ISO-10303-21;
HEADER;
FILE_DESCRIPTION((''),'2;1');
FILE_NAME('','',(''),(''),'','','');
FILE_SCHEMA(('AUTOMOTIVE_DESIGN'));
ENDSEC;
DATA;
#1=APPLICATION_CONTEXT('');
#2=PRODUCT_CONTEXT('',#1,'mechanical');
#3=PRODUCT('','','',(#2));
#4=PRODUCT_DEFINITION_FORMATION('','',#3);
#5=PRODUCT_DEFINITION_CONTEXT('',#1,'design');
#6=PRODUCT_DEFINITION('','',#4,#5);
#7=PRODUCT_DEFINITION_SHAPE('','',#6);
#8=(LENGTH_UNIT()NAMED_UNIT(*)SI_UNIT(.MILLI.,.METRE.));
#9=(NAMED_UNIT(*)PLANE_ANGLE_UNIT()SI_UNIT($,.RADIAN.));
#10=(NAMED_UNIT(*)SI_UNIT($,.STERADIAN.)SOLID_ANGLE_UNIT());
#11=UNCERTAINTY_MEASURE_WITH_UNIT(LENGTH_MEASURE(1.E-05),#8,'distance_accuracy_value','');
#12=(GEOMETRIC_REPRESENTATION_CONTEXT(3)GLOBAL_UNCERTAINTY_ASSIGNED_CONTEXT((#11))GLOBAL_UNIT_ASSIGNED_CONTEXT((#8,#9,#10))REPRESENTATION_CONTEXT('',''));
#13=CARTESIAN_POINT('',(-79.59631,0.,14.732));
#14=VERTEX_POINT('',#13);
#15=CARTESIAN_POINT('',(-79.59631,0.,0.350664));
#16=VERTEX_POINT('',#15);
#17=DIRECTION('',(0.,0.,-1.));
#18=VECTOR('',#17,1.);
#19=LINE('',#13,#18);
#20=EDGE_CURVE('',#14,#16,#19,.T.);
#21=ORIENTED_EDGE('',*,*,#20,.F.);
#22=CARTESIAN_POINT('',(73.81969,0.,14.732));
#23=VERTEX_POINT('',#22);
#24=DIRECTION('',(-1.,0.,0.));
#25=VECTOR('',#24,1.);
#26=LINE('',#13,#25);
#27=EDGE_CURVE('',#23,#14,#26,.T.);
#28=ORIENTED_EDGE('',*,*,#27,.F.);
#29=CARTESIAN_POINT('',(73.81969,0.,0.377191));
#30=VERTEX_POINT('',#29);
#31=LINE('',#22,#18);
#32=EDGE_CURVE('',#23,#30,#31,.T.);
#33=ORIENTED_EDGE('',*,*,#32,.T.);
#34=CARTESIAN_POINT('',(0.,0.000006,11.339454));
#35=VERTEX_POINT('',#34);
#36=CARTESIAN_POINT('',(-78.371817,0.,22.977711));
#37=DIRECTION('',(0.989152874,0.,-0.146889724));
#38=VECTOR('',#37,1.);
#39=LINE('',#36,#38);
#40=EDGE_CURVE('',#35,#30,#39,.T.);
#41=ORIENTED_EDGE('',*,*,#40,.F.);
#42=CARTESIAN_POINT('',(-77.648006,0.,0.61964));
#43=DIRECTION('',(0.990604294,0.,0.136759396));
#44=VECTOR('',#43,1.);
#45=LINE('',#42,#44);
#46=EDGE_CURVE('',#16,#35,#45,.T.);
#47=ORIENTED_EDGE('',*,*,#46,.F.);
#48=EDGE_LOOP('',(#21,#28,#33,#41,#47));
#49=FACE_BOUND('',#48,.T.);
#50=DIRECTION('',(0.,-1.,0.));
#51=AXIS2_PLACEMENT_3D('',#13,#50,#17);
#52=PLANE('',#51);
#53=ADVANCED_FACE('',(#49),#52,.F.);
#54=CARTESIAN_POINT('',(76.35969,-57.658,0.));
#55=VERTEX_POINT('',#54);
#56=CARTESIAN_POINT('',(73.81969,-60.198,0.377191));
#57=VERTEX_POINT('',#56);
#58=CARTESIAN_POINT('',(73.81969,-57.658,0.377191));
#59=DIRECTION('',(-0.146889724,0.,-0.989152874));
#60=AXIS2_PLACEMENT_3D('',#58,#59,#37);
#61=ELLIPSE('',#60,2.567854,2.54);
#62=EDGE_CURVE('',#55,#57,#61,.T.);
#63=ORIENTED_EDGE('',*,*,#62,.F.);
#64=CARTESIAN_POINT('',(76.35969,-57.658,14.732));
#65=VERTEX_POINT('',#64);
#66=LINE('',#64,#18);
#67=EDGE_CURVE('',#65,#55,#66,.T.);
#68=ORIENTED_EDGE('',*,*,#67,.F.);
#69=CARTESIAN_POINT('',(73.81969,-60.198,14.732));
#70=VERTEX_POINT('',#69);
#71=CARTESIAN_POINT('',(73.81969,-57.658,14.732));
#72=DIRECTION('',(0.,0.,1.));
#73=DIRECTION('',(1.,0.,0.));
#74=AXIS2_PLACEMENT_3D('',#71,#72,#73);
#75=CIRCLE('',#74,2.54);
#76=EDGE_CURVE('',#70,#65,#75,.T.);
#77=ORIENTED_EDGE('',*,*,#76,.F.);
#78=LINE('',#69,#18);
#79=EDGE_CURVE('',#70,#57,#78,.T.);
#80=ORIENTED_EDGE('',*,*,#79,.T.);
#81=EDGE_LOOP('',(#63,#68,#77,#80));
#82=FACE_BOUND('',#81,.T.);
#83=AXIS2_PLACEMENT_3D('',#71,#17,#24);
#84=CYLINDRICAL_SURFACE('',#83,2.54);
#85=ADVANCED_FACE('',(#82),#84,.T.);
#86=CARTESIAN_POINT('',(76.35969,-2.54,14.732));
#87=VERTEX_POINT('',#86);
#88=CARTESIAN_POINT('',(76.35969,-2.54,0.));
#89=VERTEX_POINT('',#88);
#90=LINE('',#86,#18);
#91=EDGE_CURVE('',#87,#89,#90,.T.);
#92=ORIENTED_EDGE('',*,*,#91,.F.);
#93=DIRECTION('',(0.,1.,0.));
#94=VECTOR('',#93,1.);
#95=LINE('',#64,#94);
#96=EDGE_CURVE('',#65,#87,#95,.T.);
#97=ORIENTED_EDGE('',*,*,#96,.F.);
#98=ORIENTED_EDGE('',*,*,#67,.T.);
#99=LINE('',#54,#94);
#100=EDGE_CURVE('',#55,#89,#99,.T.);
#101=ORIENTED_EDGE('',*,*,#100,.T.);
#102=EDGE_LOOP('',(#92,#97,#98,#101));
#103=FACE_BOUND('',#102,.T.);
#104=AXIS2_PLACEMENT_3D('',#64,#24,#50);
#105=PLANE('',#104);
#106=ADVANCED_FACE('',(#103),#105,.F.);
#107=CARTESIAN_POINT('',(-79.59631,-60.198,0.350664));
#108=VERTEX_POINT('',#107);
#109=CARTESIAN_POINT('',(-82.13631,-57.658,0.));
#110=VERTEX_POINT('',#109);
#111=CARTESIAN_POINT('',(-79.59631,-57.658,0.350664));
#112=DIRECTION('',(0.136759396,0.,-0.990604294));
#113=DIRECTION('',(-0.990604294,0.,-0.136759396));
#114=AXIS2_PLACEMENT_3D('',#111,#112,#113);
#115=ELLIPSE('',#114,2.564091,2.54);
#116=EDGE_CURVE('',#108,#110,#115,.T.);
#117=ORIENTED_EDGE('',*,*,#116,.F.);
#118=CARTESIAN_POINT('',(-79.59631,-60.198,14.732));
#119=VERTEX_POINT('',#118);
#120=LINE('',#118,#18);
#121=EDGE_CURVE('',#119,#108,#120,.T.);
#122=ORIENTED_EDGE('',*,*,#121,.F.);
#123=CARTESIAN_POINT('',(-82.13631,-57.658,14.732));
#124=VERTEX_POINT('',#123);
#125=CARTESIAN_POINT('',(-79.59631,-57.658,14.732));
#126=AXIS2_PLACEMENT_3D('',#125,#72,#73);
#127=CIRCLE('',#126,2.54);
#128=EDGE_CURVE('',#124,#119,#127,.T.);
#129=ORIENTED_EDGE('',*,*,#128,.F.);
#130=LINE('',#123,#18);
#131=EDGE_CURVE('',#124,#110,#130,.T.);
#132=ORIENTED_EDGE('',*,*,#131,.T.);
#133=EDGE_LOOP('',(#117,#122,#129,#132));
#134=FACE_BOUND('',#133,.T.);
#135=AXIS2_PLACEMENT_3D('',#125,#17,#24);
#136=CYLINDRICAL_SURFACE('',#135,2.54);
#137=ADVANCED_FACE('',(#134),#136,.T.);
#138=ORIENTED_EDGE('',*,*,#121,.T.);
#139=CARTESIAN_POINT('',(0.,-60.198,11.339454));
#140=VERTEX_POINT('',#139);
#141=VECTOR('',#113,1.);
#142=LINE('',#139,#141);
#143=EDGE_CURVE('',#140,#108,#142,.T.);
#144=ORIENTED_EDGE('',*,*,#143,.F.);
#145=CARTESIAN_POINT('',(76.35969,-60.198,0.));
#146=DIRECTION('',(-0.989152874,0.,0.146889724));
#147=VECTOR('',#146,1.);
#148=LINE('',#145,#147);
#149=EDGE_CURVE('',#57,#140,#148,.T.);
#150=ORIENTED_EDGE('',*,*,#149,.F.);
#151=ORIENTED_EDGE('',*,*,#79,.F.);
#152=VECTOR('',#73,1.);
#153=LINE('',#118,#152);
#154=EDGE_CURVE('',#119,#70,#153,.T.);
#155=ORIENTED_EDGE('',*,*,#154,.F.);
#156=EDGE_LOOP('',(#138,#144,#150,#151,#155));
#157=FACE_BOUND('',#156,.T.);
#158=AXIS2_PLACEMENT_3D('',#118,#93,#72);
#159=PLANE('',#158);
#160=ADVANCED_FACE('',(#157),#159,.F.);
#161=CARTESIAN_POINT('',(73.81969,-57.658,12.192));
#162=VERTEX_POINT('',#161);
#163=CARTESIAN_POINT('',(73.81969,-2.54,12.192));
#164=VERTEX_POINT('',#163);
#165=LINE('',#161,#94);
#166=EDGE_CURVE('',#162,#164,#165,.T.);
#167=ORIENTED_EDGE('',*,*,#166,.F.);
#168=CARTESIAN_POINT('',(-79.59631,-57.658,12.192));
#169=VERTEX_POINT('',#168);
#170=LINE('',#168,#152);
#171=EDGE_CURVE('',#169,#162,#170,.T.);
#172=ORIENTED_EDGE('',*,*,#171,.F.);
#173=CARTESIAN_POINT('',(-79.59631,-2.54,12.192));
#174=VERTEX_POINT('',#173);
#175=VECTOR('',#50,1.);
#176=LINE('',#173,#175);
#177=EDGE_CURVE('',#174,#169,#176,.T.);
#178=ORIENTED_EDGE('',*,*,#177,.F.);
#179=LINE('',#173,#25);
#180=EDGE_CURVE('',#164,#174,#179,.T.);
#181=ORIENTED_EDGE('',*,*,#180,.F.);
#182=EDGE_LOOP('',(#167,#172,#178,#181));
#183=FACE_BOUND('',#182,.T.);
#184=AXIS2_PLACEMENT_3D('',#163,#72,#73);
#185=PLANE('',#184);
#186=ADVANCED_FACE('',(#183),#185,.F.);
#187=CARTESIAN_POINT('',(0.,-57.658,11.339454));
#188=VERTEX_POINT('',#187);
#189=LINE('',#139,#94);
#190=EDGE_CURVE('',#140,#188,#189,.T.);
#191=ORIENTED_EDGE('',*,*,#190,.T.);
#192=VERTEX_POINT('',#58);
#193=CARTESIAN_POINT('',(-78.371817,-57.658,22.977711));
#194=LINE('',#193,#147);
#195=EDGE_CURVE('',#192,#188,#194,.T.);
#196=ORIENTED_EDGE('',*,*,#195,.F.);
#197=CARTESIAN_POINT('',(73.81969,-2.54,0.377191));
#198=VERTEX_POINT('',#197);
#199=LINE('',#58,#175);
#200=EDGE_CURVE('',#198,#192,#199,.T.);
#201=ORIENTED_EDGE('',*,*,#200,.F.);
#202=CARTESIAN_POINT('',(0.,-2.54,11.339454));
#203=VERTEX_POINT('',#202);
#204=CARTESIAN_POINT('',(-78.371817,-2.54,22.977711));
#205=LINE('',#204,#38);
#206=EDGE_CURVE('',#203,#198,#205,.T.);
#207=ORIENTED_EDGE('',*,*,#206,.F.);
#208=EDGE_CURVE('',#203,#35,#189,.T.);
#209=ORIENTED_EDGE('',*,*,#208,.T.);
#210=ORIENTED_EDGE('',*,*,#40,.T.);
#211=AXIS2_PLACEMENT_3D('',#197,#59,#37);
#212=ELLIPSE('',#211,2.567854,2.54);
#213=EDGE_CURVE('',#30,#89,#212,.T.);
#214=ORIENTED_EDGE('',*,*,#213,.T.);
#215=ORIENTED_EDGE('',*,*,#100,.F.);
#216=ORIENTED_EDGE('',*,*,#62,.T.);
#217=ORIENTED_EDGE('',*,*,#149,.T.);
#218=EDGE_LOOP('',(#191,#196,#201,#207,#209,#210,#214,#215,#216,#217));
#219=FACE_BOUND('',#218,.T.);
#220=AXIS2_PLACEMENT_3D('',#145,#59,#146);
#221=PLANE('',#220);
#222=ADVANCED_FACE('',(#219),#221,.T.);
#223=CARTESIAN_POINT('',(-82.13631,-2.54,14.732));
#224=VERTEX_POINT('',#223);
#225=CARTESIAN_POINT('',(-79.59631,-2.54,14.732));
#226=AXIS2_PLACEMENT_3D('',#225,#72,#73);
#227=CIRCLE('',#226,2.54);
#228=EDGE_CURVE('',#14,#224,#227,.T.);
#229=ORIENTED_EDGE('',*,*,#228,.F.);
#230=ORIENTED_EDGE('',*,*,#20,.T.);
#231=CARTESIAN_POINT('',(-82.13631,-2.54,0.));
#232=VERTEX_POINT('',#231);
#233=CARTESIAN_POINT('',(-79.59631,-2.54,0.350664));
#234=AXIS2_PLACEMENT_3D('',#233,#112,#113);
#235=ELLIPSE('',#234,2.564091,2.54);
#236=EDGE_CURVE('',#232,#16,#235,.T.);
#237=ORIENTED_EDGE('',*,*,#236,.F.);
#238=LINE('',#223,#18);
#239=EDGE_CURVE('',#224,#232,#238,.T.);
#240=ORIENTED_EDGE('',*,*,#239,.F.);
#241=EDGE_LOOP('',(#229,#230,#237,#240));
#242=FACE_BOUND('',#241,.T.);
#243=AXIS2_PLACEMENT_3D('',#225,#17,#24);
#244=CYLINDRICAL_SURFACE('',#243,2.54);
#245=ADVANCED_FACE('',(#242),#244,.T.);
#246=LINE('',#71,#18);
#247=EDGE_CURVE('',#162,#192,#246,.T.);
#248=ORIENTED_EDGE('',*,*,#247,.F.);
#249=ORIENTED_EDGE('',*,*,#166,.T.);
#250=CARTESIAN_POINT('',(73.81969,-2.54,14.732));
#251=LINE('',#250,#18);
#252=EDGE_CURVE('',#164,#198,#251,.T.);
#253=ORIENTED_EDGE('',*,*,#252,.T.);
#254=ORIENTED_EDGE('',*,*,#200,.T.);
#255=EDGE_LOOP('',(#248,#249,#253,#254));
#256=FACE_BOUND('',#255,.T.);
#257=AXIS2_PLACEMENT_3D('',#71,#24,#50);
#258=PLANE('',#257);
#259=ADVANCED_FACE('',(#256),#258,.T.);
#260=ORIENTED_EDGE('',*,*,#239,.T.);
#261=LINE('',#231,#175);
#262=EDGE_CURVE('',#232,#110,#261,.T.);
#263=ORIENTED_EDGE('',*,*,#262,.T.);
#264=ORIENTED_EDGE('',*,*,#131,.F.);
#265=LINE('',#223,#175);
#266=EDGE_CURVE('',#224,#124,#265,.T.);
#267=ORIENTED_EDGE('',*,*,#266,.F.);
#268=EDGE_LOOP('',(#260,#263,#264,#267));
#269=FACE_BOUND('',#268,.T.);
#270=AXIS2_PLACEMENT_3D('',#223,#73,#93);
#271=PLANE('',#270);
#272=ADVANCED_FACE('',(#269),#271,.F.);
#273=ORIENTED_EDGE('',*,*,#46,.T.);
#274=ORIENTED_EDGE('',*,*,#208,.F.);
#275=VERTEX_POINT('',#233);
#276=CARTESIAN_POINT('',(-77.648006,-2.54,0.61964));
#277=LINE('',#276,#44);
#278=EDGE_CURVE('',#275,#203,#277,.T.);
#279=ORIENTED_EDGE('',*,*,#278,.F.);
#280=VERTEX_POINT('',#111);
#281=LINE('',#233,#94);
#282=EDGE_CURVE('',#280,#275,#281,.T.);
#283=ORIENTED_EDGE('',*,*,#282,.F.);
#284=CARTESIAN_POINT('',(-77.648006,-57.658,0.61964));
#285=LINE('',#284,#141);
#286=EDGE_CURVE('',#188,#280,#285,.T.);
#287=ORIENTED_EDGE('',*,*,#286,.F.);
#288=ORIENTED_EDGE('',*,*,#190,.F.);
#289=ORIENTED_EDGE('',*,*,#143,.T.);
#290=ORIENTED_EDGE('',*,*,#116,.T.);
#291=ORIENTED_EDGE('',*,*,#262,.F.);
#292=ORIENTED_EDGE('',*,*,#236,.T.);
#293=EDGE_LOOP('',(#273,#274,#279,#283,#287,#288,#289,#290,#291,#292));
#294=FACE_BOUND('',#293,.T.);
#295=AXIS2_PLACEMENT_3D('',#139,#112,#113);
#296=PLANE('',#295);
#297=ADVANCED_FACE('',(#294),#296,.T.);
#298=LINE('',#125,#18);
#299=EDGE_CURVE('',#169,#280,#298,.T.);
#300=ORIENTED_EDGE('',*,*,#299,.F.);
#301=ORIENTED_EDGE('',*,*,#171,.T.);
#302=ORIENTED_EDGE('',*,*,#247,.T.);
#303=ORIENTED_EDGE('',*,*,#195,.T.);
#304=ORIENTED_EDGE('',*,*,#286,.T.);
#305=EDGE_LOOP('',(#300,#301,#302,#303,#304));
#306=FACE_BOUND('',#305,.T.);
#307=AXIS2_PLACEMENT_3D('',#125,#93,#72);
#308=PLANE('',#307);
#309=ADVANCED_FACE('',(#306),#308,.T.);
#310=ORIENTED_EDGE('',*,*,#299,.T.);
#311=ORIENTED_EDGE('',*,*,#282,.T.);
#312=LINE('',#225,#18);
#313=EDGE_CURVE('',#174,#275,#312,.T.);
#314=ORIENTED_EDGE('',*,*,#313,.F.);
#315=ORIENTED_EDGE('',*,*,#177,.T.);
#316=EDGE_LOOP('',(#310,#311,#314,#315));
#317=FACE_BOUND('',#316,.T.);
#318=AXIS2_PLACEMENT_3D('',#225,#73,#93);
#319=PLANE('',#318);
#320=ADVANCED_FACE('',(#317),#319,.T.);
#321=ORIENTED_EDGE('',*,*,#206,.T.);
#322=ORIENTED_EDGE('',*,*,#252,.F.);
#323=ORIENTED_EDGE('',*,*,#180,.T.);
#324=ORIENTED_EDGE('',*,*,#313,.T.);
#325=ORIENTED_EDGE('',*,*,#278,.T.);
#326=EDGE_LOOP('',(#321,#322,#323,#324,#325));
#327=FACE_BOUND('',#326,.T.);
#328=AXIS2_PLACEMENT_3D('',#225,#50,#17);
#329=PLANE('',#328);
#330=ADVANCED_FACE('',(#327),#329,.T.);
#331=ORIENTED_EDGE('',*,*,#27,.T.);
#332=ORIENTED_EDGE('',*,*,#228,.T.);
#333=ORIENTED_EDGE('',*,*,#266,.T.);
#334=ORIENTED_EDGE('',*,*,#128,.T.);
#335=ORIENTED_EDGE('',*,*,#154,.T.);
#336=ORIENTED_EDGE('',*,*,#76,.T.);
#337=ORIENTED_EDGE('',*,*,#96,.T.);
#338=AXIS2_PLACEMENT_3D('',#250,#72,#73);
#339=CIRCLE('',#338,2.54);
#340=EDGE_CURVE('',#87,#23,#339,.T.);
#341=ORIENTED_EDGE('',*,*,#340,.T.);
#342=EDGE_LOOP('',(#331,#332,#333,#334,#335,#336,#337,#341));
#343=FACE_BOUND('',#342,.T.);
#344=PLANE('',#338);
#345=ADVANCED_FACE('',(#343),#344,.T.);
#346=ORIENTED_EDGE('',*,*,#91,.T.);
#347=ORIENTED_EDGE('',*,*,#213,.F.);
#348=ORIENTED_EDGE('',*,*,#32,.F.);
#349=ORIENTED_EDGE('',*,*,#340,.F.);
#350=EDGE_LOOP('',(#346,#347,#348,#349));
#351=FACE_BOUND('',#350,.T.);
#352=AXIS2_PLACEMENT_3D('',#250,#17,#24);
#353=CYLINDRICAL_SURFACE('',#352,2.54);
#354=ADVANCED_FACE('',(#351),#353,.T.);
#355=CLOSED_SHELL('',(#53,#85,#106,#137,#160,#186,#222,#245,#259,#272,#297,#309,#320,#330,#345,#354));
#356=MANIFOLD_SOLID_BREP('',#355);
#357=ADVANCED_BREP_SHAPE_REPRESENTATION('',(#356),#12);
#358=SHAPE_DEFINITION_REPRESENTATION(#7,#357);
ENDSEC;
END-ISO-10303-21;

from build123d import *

# Parameters (mm, degrees)
BOSS_EXTRUDE1_DEPTH     = 14.732
SHELL1_START            = -57.658
SHELL1_OUTLINE_W        = 153.416
SHELL1_OUTLINE_H        = 12.192
SHELL1_DEPTH            = 55.118
CUT_EXTRUDE1_DEPTH      = 103.89414179
CUT_EXTRUDE1_DEPTH_BACK = 103.89414179


# Read off the part's stored shape, not the designer's step: Shell1
with BuildPart() as part:
    # Sketch1 → Boss-Extrude1 (new body)
    with BuildSketch(Plane.XY):
        with BuildLine():
            Line((-79.596309795, 0), (73.819690205, 0))
            ThreePointArc((73.819690205, 0), (75.615741429, -0.743948776), (76.359690205, -2.54))
            Line((76.359690205, -2.54), (76.359690205, -57.658))
            ThreePointArc((76.359690205, -57.658), (75.615741429, -59.454051224), (73.819690205, -60.198))
            Line((73.819690205, -60.198), (-79.596309795, -60.198))
            ThreePointArc((-79.596309795, -60.198), (-81.392361019, -59.454051224), (-82.136309795, -57.658))
            Line((-82.136309795, -57.658), (-82.136309795, -2.54))
            ThreePointArc((-82.136309795, -2.54), (-81.392361019, -0.743948776), (-79.596309795, 0))
        make_face()
    extrude(amount=BOSS_EXTRUDE1_DEPTH)

    # Shell1 outline → Shell1 (cut)
    with BuildSketch(Plane(origin=(0, 0, 0), x_dir=(1, 0, 0), z_dir=(0, 1, 0)).offset(SHELL1_START)):
        with Locations((-2.888309795, -6.096)):
            Rectangle(SHELL1_OUTLINE_W, SHELL1_OUTLINE_H)
    extrude(amount=SHELL1_DEPTH, mode=Mode.SUBTRACT)

    # Sketch3 → Cut-Extrude1 (cut, two sides: drawn at the far end of the back side and taken through both)
    with BuildSketch(Plane(origin=(0, 0, 0), x_dir=(1, 0, 0), z_dir=(0, 1, 0)).offset(-CUT_EXTRUDE1_DEPTH_BACK)):
        Polygon((76.359690205, 0), (0, -11.339454315), (-82.136309795, 0), align=None)
    extrude(amount=CUT_EXTRUDE1_DEPTH + CUT_EXTRUDE1_DEPTH_BACK, mode=Mode.SUBTRACT)


solid = part.part
